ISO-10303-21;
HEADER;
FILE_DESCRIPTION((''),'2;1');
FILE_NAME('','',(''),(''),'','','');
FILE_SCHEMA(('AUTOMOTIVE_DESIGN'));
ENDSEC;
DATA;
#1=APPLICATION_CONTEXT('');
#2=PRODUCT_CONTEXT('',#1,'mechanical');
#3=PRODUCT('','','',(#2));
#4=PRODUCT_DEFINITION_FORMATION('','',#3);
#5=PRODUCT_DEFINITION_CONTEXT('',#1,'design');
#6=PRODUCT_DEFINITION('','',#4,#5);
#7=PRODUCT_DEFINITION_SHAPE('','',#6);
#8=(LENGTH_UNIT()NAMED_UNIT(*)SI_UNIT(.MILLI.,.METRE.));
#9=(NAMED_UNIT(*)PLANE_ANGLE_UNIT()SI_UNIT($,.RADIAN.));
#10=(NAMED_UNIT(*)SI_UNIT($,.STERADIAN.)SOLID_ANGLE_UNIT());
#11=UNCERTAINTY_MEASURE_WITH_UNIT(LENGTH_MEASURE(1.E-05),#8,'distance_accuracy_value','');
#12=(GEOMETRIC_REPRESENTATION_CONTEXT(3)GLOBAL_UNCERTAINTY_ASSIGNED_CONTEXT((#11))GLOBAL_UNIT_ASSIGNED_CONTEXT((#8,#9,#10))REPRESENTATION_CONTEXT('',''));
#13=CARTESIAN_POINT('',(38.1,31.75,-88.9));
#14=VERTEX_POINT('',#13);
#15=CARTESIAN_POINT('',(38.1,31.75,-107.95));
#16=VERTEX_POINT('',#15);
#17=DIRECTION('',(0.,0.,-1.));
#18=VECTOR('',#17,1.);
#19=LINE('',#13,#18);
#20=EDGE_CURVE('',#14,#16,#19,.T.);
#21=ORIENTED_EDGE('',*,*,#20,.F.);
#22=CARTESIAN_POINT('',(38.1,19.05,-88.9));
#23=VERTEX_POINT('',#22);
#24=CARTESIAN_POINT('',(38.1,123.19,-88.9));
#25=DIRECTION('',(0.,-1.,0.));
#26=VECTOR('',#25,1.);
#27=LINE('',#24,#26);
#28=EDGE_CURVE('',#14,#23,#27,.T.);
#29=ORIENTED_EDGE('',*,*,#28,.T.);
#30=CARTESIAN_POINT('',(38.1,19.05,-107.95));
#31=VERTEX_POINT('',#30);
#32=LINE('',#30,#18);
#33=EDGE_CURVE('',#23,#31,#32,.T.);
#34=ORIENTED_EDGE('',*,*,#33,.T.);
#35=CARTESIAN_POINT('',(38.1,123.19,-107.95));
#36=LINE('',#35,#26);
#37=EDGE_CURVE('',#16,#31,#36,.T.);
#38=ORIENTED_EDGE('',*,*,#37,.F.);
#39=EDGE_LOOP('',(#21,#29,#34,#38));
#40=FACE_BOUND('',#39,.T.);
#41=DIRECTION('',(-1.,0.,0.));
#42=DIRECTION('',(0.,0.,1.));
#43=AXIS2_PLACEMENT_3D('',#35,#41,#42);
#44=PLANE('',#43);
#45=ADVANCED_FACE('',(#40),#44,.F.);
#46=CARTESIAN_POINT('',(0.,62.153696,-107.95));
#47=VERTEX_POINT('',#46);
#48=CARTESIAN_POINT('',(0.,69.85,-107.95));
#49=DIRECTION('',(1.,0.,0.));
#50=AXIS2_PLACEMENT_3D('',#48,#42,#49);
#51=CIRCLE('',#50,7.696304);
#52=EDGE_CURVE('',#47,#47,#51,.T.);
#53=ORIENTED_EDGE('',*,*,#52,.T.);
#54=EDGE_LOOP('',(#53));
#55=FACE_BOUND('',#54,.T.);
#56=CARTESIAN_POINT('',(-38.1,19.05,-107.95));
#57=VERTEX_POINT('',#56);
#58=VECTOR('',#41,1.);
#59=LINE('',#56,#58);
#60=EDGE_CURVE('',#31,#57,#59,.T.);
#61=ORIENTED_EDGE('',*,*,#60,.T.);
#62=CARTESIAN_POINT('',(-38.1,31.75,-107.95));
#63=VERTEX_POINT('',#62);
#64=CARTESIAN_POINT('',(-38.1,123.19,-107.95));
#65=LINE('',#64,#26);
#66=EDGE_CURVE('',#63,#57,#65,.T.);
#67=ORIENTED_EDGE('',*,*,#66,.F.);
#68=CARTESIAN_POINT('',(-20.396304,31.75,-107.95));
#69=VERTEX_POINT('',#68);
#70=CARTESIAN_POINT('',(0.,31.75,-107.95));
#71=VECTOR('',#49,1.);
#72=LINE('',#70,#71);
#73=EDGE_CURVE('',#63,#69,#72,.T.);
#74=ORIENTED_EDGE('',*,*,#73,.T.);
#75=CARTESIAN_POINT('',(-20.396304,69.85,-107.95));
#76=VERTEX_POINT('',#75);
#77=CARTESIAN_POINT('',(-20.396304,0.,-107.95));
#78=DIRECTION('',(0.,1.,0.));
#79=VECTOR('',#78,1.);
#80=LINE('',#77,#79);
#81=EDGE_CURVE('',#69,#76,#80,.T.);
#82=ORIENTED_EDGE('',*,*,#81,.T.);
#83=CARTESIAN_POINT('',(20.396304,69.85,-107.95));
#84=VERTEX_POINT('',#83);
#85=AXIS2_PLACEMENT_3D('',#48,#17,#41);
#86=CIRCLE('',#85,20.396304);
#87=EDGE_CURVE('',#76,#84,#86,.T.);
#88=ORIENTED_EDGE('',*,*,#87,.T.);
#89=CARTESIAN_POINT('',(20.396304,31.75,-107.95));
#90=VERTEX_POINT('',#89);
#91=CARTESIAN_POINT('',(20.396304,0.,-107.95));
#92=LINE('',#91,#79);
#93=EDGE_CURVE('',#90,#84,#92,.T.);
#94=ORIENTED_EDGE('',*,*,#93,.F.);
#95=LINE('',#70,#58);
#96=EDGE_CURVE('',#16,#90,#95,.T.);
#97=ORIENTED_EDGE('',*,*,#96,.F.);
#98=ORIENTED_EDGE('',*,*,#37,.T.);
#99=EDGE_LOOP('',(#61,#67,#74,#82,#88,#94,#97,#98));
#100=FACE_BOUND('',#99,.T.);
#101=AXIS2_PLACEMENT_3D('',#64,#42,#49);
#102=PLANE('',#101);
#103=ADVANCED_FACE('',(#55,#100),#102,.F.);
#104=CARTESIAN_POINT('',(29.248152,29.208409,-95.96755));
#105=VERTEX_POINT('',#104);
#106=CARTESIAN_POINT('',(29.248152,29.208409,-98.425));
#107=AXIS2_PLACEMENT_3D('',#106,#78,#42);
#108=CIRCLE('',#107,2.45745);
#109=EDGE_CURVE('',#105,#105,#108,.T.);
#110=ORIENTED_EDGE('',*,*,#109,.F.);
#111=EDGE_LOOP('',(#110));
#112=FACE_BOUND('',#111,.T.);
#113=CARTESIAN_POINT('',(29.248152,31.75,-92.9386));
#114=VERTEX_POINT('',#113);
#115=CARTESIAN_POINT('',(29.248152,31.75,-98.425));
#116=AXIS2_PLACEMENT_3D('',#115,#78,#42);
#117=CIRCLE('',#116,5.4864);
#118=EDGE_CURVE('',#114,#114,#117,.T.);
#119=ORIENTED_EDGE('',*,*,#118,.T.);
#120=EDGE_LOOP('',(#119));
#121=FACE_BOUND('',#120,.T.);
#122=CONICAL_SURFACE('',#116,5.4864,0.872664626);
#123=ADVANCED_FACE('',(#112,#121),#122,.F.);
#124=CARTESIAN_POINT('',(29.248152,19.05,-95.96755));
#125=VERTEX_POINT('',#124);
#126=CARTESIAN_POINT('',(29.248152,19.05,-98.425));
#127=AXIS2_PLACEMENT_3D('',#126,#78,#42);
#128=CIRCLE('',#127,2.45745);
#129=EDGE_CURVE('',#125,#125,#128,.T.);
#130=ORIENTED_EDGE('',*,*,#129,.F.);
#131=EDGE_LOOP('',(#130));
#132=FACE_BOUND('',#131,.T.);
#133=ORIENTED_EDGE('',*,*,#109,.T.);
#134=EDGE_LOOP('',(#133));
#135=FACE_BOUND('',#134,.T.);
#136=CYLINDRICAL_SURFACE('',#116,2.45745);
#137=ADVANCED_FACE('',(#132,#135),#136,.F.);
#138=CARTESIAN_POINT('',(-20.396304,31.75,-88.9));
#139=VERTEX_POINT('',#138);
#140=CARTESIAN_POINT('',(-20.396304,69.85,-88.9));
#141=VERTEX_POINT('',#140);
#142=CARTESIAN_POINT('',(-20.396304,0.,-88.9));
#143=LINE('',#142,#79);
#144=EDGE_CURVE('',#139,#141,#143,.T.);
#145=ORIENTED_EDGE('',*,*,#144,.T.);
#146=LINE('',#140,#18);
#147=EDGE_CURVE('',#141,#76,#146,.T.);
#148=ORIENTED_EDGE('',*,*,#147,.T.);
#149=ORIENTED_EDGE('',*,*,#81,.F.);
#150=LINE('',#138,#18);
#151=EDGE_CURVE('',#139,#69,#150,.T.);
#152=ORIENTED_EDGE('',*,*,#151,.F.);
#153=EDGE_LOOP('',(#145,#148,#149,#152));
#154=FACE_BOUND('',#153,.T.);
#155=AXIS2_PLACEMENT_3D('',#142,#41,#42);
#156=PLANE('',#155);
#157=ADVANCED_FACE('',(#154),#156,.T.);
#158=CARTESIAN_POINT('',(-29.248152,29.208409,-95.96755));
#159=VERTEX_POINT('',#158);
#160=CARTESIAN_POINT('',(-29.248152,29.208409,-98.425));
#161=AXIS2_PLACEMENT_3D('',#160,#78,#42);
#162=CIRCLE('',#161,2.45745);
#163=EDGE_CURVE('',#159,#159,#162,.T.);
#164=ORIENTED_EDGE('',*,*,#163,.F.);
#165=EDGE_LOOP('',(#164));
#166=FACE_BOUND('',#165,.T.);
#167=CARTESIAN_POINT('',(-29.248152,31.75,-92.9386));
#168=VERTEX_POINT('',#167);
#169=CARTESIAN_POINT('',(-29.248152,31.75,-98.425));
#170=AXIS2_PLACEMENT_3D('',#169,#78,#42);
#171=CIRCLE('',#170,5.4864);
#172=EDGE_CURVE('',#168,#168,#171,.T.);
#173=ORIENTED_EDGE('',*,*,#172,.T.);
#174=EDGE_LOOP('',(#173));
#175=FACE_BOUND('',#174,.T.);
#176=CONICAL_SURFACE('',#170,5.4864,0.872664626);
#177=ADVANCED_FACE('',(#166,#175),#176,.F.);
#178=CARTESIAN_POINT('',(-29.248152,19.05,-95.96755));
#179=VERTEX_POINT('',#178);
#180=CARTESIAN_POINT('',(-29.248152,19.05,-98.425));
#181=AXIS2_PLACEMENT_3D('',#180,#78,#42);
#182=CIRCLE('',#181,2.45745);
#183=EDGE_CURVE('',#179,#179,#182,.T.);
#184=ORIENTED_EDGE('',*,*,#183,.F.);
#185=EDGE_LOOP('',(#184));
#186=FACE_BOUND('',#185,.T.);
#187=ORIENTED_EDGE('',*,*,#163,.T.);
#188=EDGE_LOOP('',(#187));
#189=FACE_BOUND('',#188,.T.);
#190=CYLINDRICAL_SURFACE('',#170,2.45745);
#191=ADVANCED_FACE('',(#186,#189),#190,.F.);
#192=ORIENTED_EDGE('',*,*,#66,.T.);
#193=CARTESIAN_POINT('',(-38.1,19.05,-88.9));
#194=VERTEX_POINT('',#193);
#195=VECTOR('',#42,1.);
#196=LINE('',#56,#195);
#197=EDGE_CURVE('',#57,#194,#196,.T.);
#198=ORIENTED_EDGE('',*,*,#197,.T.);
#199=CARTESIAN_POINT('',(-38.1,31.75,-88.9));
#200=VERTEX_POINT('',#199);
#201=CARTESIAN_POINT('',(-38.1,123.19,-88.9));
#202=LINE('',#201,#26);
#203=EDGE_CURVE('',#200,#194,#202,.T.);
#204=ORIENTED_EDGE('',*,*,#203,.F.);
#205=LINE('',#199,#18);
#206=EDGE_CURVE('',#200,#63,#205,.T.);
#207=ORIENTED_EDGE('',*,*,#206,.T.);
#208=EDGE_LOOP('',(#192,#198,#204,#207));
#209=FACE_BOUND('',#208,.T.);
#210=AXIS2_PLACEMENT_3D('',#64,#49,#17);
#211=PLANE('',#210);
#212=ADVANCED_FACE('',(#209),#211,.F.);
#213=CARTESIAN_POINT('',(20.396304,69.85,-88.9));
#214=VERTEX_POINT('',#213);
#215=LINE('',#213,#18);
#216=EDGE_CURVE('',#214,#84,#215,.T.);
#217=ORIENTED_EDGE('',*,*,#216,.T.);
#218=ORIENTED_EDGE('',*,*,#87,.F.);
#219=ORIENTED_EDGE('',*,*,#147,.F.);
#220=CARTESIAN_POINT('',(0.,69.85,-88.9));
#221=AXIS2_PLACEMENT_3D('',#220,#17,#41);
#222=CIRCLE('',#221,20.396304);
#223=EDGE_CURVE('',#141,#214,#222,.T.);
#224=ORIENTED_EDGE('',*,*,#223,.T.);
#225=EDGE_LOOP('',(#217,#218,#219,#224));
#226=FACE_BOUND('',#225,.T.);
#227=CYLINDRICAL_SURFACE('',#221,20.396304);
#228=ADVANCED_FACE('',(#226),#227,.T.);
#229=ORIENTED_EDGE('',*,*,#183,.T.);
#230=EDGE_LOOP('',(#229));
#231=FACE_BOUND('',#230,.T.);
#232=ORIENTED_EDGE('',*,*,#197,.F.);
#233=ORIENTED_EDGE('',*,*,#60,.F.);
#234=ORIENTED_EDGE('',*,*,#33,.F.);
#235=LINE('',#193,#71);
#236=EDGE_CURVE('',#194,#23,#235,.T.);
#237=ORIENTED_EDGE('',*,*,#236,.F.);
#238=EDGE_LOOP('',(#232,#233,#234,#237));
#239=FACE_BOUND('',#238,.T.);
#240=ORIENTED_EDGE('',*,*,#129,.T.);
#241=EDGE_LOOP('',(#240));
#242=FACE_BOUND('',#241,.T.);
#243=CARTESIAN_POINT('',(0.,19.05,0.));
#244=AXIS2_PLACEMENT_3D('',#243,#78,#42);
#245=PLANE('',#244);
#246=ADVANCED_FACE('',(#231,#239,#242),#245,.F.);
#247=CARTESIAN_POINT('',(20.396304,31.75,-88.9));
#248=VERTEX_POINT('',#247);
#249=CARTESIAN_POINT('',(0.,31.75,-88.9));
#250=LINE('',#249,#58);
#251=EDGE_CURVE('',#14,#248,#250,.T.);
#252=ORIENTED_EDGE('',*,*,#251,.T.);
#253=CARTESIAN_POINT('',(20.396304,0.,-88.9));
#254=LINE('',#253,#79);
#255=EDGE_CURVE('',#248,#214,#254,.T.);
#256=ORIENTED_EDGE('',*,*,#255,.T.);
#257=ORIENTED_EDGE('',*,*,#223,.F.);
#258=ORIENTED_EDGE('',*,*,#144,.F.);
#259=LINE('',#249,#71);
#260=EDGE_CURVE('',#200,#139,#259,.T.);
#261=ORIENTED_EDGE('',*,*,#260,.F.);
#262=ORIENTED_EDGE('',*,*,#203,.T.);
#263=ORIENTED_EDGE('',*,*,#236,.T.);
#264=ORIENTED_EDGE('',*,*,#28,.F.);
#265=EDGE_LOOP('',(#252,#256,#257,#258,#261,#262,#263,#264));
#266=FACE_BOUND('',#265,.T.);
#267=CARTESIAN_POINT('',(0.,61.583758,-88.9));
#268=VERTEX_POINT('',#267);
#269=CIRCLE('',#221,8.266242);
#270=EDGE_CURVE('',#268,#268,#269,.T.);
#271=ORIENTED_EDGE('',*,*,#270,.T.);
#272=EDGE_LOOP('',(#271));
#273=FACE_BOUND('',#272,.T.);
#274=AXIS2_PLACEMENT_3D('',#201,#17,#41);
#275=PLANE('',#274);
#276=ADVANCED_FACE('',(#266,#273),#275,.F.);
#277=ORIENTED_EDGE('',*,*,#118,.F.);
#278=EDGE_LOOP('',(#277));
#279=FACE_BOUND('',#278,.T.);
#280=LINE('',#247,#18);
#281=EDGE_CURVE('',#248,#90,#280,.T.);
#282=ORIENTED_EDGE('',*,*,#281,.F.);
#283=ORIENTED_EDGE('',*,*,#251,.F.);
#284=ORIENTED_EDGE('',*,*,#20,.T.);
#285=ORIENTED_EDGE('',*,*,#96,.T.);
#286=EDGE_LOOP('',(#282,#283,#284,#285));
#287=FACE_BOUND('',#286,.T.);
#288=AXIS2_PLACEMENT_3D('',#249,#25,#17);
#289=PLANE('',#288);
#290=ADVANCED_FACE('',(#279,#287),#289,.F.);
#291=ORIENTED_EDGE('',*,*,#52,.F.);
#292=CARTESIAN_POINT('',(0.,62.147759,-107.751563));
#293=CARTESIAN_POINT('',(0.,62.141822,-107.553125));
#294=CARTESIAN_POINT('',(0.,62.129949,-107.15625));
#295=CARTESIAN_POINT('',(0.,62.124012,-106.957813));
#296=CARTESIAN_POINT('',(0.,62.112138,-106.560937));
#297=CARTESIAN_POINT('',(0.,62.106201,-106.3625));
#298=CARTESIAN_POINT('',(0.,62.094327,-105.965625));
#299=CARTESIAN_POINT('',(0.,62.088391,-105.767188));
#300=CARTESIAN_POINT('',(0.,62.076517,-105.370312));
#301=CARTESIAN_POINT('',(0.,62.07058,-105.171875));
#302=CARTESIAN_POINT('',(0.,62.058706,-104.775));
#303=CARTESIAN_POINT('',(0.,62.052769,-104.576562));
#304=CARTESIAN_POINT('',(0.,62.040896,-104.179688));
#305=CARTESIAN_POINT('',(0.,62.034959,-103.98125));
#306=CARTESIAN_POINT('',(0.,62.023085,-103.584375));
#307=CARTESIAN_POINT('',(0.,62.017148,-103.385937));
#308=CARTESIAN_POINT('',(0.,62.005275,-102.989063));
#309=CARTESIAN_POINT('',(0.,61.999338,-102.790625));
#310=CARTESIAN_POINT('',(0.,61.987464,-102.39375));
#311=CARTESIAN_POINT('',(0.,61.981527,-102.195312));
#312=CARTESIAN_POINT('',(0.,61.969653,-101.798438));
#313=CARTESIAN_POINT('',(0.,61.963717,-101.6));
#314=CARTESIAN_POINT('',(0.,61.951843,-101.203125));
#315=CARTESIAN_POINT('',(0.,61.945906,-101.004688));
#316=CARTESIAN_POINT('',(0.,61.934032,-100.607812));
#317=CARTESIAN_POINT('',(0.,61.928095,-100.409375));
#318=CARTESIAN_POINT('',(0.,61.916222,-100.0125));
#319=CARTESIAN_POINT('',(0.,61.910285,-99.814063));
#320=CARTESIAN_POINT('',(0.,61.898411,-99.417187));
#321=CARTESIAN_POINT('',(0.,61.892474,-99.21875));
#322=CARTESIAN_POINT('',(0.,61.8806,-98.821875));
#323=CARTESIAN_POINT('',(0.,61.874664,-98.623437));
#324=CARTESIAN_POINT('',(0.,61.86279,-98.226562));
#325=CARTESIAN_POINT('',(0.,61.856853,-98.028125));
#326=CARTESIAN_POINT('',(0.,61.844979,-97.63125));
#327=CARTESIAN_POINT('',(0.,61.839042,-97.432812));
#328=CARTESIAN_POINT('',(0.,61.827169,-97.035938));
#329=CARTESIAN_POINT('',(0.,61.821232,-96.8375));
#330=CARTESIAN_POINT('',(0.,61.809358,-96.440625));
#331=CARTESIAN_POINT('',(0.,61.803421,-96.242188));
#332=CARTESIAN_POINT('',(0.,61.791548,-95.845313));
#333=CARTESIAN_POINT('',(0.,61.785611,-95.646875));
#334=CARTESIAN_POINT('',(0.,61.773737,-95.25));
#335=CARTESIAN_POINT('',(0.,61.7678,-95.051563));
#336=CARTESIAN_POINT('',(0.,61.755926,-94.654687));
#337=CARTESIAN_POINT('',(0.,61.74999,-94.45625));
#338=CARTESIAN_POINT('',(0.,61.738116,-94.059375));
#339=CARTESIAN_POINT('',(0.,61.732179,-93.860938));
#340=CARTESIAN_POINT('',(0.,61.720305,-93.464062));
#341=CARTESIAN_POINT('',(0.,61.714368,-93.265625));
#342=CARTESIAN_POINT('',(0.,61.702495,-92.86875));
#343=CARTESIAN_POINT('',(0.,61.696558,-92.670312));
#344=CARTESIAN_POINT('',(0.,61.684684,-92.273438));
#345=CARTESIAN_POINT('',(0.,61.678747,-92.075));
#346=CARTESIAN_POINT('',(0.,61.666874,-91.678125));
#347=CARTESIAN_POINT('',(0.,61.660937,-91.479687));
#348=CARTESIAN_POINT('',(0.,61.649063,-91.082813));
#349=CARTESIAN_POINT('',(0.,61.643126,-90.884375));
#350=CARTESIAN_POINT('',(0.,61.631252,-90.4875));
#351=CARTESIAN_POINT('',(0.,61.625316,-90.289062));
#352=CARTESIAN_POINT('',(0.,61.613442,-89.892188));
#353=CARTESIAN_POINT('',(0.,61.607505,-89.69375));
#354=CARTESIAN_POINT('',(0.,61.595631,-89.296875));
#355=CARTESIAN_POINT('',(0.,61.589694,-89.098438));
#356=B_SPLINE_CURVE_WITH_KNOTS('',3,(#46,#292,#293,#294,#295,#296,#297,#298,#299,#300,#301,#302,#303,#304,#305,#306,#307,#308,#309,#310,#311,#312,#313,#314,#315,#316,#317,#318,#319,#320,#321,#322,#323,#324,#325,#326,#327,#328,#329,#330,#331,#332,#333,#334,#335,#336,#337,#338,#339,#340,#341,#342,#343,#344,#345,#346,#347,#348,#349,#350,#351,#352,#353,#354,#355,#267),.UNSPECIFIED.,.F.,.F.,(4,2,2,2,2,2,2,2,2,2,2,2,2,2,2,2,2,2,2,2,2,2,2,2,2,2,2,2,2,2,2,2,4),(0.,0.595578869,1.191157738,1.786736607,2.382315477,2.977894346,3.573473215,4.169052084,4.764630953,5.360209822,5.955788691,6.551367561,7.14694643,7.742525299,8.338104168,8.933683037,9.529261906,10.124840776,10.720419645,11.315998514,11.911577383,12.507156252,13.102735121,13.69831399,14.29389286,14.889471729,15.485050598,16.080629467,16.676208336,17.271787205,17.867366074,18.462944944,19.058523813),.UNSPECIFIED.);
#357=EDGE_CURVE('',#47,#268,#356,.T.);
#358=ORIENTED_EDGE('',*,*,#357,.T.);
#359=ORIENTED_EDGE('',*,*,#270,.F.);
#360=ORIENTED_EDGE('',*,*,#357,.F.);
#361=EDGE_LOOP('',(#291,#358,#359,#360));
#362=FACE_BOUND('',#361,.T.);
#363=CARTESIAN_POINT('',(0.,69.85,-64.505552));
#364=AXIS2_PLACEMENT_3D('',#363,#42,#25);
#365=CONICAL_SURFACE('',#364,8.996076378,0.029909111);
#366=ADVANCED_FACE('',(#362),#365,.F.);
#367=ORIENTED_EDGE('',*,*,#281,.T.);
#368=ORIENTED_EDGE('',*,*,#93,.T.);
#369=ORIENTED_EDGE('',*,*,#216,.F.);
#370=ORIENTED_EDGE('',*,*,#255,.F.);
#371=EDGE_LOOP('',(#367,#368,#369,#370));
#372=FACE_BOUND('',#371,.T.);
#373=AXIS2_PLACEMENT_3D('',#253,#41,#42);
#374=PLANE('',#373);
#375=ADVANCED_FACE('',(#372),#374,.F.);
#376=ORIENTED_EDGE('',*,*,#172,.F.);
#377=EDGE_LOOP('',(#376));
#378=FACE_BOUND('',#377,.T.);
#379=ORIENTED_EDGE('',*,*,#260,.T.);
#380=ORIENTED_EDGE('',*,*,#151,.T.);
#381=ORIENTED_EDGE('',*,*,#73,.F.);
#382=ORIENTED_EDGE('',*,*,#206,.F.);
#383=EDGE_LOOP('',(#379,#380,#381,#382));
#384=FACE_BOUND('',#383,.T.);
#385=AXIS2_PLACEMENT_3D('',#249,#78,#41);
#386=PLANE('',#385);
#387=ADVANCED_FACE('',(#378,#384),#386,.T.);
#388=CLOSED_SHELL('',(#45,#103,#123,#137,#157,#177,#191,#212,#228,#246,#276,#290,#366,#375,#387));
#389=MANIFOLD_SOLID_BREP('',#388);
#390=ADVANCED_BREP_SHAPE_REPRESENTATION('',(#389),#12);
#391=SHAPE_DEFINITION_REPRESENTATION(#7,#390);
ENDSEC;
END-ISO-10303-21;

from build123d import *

# Parameters (mm, degrees)
SKETCH1_W                                         = 76.2
SKETCH1_H                                         = 19.05
BOSS_EXTRUDE1_DEPTH                               = 104.14
CUT_EXTRUDE1_DEPTH                                = 131.346801265
CSK_FOR_8_FLAT_HEAD_MACHINE_SCREW_100_D           = 4.9149
CSK_FOR_8_FLAT_HEAD_MACHINE_SCREW_100_CSINK_D     = 10.9728
CSK_FOR_8_FLAT_HEAD_MACHINE_SCREW_100_CSINK_ANGLE = 100


# Read off the part's stored shape, not the designer's step: SurfaceCut1
with BuildPart() as part:
    # Sketch1 → Boss-Extrude1 (new body)
    with BuildSketch(Plane(origin=(0, 19.05, 0), x_dir=(1, 0, 0), z_dir=(0, 1, 0))):
        with Locations((0, 98.425)):
            Rectangle(SKETCH1_W, SKETCH1_H)
    extrude(amount=BOSS_EXTRUDE1_DEPTH)

    # SurfaceCut1 outline → SurfaceCut1 (revolve, cut)
    with BuildSketch(Plane.XZ.offset(-69.85)):
        Polygon((8.266242493, -88.9), (0, -88.9), (0, -107.95), (7.696303968, -107.95), align=None)
    revolve(axis=Axis((0, 69.85, 0), (0, 0, 1)), mode=Mode.SUBTRACT)

    # Sketch3 → Cut-Extrude1 (cut, through all)
    with BuildSketch(Plane(origin=(0, 0, -107.95), x_dir=(-1, 0, 0), z_dir=(0, 0, -1))):
        with BuildLine():
            Line((25.4, 31.75), (37.1816, 31.75))
            Line((37.1816, 31.75), (38.1, 31.75))
            Line((38.1, 31.75), (38.1, 123.19))
            Line((38.1, 123.19), (-38.1, 123.19))
            Line((-38.1, 123.19), (-38.1, 31.75))
            Line((-38.1, 31.75), (-37.1816, 31.75))
            Line((-37.1816, 31.75), (-25.4, 31.75))
            Line((-25.4, 31.75), (-20.396303968, 31.75))
            Line((-20.396303968, 31.75), (-20.396303968, 69.85))
            ThreePointArc((-20.396303968, 69.85), (0, 90.246303968), (20.396303968, 69.85))
            Line((20.396303968, 69.85), (20.396303968, 31.75))
            Line((20.396303968, 31.75), (25.4, 31.75))
        make_face()
    extrude(amount=-CUT_EXTRUDE1_DEPTH, mode=Mode.SUBTRACT)

    # CSK for #8 Flat Head Machine Screw (100)1 (through all)
    with Locations(Plane(origin=(0, 31.75, 0), x_dir=(1, 0, 0), z_dir=(0, 1, 0))):
        with Locations((-29.248151984, 98.425), (29.248151984, 98.425)):
            CounterSinkHole(CSK_FOR_8_FLAT_HEAD_MACHINE_SCREW_100_D / 2, CSK_FOR_8_FLAT_HEAD_MACHINE_SCREW_100_CSINK_D / 2, counter_sink_angle=CSK_FOR_8_FLAT_HEAD_MACHINE_SCREW_100_CSINK_ANGLE)


solid = part.part
